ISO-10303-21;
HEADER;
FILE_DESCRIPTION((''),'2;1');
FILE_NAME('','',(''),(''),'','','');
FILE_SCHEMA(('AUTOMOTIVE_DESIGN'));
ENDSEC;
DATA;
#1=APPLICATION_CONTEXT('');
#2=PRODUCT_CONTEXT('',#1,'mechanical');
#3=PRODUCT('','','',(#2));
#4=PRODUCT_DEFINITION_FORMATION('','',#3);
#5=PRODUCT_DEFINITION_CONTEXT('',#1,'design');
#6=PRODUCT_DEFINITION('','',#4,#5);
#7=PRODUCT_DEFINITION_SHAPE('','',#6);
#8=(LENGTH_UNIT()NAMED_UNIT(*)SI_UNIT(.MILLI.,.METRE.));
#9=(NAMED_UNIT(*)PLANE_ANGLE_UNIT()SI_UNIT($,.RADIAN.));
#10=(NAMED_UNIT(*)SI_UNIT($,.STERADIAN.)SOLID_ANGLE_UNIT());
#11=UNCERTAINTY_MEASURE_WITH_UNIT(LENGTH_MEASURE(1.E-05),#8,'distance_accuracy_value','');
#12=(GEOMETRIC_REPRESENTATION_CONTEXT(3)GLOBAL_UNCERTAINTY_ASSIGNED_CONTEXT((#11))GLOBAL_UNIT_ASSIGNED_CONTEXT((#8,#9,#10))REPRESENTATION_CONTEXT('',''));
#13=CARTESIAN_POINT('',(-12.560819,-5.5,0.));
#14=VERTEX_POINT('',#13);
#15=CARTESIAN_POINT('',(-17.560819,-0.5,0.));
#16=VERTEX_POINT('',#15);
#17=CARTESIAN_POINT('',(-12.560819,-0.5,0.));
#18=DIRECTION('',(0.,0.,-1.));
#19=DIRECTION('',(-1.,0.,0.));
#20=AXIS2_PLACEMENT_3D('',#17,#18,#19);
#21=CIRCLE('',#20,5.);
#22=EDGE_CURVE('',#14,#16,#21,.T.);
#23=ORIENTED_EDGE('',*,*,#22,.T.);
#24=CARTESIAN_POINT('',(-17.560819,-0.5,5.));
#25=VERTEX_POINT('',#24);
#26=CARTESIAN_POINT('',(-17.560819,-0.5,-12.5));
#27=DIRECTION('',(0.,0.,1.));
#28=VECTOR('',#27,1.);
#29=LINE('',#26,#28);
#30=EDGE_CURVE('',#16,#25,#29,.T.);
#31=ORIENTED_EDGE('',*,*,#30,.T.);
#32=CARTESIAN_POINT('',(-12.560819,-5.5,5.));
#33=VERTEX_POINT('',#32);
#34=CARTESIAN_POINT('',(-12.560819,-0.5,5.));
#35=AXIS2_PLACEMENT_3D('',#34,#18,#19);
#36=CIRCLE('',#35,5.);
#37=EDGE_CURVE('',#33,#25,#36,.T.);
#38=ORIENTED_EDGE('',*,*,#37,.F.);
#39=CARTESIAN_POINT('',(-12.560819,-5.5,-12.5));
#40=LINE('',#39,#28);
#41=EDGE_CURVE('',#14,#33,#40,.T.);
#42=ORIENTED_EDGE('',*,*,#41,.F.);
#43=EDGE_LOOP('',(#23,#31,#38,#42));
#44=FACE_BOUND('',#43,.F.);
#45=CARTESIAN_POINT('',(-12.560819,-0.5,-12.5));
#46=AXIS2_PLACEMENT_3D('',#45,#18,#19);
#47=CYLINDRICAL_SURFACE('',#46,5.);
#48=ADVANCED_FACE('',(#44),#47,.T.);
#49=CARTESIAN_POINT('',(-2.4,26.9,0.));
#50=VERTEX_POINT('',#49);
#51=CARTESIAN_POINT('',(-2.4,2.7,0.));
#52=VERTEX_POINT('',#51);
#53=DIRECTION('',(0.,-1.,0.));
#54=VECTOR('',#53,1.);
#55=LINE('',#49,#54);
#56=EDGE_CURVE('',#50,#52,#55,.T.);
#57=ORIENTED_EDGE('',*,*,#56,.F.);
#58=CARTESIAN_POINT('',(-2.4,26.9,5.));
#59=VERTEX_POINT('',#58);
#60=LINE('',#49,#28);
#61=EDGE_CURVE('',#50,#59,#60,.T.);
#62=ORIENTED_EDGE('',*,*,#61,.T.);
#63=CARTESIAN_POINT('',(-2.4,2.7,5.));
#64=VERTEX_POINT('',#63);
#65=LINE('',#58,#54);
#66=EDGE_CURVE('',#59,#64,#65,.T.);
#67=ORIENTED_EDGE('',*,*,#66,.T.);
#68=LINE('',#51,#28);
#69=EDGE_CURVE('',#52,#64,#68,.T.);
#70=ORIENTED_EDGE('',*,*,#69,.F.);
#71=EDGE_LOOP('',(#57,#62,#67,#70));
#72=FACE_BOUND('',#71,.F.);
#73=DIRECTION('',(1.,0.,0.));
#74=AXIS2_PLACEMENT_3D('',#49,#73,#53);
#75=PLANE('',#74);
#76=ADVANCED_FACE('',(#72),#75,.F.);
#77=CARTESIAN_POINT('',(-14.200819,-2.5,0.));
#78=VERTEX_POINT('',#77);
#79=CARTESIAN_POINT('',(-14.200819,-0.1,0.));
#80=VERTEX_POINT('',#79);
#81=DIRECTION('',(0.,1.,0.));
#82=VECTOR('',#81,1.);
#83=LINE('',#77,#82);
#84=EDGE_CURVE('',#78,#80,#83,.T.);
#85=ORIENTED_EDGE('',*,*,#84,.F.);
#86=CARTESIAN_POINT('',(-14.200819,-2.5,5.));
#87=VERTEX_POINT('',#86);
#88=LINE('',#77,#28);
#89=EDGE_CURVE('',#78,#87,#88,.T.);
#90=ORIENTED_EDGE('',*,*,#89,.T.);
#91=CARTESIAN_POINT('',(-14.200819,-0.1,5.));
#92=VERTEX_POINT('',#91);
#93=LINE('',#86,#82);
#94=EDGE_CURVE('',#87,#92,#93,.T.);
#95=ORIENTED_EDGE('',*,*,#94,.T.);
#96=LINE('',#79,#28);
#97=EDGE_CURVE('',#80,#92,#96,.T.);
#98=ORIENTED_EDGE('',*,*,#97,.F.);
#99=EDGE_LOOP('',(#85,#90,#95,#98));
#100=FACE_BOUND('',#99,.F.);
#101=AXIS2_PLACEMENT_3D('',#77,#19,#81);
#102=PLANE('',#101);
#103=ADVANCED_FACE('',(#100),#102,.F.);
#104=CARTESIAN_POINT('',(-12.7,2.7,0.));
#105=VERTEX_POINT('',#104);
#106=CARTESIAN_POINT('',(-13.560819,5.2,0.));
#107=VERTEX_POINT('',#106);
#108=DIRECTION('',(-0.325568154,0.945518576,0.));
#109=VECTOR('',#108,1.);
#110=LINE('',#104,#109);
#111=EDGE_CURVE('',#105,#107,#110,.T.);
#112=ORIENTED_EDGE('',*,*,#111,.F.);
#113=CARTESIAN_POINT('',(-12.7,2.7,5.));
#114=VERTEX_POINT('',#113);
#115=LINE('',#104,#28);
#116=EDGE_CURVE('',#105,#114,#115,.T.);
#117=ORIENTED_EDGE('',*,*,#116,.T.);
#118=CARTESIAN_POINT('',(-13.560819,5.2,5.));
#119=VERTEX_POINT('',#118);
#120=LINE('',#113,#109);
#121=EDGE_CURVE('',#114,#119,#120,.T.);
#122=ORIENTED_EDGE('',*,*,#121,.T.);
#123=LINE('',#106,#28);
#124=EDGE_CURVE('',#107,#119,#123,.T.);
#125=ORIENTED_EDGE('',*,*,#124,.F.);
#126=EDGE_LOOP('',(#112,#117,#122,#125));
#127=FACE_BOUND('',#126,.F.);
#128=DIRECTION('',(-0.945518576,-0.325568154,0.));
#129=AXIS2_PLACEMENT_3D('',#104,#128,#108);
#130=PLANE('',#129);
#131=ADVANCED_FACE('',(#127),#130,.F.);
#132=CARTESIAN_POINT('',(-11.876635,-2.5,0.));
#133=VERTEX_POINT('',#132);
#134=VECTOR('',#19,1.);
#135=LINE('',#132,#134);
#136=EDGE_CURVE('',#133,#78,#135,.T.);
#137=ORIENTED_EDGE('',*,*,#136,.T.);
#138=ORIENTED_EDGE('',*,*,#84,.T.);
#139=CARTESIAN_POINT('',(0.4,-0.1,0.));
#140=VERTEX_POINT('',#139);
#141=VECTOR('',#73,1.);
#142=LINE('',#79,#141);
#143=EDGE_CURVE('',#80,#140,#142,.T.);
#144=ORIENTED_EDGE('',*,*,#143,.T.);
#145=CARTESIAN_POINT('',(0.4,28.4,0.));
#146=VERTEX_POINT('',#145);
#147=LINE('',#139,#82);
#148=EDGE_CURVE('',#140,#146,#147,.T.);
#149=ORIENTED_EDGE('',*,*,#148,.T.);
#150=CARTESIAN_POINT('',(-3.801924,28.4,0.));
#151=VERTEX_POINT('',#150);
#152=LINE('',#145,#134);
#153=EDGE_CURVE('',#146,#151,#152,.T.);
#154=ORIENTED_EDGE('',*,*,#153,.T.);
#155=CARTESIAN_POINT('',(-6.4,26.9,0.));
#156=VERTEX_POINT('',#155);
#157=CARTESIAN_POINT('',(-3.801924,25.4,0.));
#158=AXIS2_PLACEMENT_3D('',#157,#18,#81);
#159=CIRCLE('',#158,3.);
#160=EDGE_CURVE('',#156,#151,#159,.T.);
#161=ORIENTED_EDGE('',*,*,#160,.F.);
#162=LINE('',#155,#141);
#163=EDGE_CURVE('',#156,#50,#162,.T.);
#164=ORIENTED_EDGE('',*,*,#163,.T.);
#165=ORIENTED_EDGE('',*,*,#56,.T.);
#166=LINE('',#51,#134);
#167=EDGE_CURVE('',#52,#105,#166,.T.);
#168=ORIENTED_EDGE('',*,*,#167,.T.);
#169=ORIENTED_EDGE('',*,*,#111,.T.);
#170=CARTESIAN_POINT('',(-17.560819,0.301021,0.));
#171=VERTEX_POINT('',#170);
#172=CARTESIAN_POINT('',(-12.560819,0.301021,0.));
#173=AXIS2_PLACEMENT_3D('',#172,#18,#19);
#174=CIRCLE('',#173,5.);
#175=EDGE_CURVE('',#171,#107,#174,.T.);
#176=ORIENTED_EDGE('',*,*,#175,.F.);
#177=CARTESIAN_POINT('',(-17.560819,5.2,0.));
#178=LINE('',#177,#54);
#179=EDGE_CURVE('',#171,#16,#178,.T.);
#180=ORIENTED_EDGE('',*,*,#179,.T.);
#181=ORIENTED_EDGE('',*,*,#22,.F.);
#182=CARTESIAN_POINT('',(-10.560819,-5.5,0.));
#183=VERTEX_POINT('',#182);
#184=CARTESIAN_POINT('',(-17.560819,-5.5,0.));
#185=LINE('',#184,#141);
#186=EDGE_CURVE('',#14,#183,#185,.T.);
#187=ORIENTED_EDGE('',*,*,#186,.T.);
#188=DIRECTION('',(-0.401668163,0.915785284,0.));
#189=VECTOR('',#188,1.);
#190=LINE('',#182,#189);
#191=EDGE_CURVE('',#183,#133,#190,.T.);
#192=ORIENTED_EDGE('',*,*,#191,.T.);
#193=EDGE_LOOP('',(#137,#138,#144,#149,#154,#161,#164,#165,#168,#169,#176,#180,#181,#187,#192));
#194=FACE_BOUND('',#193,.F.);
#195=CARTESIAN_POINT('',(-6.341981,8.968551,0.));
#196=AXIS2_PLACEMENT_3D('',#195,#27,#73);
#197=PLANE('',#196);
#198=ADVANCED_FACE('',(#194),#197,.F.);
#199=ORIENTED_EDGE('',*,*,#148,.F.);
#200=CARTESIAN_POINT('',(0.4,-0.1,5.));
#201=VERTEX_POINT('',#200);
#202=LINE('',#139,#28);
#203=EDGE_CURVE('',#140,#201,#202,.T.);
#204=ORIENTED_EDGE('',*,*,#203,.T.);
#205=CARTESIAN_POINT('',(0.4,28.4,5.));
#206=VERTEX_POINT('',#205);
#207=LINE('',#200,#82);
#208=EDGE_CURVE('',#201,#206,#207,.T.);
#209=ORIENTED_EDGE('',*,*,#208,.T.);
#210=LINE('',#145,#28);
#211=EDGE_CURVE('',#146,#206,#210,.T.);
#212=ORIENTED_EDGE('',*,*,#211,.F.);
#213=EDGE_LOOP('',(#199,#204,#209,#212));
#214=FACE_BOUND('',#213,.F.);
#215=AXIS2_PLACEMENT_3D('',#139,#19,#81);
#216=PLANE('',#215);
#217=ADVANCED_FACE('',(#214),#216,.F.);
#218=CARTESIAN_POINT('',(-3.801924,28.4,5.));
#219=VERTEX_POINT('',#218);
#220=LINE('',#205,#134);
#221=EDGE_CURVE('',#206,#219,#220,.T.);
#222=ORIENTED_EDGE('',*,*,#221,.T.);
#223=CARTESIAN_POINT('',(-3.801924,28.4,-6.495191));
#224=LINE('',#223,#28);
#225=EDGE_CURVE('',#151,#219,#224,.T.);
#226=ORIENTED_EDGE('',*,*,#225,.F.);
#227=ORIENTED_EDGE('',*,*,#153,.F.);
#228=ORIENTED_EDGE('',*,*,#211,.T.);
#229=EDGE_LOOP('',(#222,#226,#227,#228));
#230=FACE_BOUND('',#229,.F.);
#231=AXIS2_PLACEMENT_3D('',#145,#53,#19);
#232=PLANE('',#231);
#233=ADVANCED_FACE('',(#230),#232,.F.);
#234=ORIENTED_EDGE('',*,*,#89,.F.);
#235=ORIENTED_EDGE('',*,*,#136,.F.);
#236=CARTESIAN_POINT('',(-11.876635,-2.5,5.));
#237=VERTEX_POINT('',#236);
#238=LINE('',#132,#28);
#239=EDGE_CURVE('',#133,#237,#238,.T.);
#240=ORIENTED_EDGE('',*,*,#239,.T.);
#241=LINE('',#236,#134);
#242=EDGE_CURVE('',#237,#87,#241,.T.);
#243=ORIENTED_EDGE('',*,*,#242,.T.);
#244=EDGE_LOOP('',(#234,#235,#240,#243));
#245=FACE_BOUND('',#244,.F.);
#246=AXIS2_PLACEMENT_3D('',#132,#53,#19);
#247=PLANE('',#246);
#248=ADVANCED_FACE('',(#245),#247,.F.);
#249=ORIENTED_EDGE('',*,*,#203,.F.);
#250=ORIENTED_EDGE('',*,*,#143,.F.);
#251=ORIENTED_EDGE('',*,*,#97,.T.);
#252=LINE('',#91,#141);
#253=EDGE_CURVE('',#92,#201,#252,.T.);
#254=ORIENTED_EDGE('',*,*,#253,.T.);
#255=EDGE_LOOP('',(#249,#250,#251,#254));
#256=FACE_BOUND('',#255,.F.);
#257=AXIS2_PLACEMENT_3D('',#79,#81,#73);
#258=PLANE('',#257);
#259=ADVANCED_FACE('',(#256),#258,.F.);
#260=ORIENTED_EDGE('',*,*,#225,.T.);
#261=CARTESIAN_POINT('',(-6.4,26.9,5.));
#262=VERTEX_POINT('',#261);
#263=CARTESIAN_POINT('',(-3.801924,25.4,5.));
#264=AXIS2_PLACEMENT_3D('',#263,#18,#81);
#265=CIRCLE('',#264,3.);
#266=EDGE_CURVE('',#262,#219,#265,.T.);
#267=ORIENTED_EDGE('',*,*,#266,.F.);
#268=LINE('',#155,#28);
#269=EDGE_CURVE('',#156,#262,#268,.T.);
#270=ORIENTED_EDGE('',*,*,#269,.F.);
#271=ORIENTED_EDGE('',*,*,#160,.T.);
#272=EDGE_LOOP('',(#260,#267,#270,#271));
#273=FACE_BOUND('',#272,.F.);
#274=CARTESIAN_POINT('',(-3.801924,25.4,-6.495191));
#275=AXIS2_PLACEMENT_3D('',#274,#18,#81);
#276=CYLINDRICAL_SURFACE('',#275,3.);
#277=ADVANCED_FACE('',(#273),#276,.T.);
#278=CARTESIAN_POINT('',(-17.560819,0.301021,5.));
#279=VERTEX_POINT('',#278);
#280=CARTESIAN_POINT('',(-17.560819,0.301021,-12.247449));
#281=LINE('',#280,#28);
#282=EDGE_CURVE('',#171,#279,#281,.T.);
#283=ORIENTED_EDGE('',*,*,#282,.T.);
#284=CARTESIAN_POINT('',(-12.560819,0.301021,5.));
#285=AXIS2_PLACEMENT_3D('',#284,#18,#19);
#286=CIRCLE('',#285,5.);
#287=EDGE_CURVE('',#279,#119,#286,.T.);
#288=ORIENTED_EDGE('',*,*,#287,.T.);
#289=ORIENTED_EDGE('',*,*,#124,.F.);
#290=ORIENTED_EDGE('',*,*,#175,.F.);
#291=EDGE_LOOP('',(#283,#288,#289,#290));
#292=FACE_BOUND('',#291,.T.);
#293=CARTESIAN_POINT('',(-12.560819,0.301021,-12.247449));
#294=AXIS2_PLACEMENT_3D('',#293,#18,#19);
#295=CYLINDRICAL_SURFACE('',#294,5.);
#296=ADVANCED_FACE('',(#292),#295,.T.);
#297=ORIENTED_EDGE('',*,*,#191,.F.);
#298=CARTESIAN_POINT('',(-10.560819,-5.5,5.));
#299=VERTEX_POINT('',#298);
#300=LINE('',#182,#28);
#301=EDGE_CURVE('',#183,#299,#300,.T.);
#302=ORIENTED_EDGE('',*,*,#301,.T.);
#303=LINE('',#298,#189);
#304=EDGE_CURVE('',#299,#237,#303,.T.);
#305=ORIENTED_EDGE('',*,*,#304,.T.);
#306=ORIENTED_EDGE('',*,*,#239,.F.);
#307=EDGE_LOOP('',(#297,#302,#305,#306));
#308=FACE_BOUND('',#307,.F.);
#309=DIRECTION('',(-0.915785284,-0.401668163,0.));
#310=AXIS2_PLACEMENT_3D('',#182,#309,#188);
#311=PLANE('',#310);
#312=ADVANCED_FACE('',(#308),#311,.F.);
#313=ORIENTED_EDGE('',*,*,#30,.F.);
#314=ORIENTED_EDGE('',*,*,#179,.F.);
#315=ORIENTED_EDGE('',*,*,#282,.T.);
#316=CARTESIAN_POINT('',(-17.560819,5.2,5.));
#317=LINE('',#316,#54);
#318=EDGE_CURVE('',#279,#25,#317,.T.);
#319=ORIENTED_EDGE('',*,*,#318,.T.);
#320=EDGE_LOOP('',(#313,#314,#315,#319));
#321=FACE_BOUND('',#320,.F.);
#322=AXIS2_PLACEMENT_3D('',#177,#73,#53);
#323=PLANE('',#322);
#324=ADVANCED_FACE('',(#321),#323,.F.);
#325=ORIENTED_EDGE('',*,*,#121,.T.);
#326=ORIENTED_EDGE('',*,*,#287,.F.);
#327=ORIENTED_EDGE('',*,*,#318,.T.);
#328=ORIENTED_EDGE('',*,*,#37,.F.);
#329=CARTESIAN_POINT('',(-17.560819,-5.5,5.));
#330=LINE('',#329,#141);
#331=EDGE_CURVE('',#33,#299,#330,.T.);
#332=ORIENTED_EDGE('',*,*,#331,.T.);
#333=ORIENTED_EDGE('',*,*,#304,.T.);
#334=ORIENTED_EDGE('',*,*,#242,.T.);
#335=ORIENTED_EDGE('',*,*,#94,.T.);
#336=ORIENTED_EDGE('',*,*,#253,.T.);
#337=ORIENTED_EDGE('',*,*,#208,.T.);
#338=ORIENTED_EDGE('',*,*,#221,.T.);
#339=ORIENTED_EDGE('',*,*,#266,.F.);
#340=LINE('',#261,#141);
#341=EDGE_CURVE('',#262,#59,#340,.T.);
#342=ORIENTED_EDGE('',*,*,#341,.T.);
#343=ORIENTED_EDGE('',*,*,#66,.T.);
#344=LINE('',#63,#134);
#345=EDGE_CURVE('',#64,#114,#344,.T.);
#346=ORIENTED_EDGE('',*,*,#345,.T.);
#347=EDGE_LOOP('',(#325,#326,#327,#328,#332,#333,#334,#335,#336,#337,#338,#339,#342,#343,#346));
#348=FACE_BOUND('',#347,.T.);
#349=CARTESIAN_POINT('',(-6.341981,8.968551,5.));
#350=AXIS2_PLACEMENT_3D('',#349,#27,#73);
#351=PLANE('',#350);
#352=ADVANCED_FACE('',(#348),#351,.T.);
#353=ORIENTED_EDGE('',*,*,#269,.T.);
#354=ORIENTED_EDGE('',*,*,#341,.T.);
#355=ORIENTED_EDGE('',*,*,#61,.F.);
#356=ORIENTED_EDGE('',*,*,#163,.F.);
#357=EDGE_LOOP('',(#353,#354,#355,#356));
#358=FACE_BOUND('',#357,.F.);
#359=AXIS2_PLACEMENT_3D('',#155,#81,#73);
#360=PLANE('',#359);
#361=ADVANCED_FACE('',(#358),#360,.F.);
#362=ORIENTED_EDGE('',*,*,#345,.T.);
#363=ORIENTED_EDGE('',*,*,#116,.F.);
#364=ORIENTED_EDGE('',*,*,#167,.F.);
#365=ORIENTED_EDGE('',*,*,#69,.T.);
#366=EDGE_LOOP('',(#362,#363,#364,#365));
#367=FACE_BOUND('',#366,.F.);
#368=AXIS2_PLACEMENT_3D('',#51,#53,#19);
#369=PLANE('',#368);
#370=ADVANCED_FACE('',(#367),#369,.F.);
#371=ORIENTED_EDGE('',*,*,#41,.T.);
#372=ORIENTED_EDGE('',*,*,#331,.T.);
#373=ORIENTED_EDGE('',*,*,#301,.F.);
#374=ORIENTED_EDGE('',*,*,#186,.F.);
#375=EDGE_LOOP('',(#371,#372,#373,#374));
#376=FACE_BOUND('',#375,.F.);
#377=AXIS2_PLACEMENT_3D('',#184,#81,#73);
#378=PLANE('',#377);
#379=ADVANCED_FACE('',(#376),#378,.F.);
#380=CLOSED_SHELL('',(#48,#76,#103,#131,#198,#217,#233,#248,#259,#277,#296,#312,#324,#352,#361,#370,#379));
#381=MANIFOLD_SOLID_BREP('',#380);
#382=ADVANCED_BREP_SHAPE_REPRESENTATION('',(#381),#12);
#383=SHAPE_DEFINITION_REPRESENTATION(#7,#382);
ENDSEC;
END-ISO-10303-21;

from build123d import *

# Parameters (mm, degrees)
F0_W        = 0.4
F0_H        = 28.4
F1_DEPTH    = 5
F2_T1_DEPTH = 17.9903810568
F3_T1_DEPTH = 29.4948974279
F3_T3_DEPTH = 30


# Not quite as in the source:
# - a fillet or chamfer that OpenCascade refuses, or shapes differently, is made with other operations: its cross-section is extruded or revolved along the edge and cut away or added


with BuildPart() as f1:
    # F0 (on Top) → F1 (new body)
    with BuildSketch(Plane.XY):
        Polygon((-17.5608190332, -5.5), (-10.5608190332, -5.5), (-11.8766345504, -2.5), (-14.2008190332, -2.5), (-14.2008190332, -0.1), (-14.2008190332, 0), (0, 0), (0, 28.4), (-6.4, 28.4), (-6.4, 26.9), (-2.4, 26.9), (-2.4, 2.7), (-12.7, 2.7), (-13.5608190332, 5.2), (-17.5608190332, 5.2), align=None)
        Polygon((-14.2008190332, 0), (-14.2008190332, -0.1), (0.4, -0.1), (0.4, 0), (0, 0), align=None)
        with Locations((0.2, 14.2)):
            Rectangle(F0_W, F0_H)
    extrude(amount=F1_DEPTH)

    # F2: fillet of radius 3 on 1 edges, made by hand

    # F2_s2 → F2_t1 (cut)
    with BuildSketch(Plane.XY.offset(-6.4951905284)):
        with BuildLine():
            ThreePointArc((-3.8019237886, 28.4), (-5.3019237886, 27.9980762114), (-6.4, 26.9))
            Line((-6.4, 26.9), (-6.4, 28.4))
            Line((-6.4, 28.4), (-3.8019237886, 28.4))
        make_face()
    extrude(amount=F2_T1_DEPTH, mode=Mode.SUBTRACT)

    # F3: fillet of radius 5 on 2 edges, made by hand

    # F3_s2 → F3_t1 (cut)
    with BuildSketch(Plane.XY.offset(-12.2474487139)):
        with BuildLine():
            ThreePointArc((-17.5608190332, 0.3010205144), (-16.4338023794, 3.4632981746), (-13.5608190332, 5.2))
            Line((-13.5608190332, 5.2), (-17.5608190332, 5.2))
            Line((-17.5608190332, 5.2), (-17.5608190332, 0.3010205144))
        make_face()
    extrude(amount=F3_T1_DEPTH, mode=Mode.SUBTRACT)

    # F3_s4 → F3_t3 (cut)
    with BuildSketch(Plane.XY.offset(-12.5)):
        with BuildLine():
            ThreePointArc((-17.5608190332, -0.5), (-16.0963529392, -4.0355339059), (-12.5608190332, -5.5))
            Line((-12.5608190332, -5.5), (-17.5608190332, -5.5))
            Line((-17.5608190332, -5.5), (-17.5608190332, -0.5))
        make_face()
    extrude(amount=F3_T3_DEPTH, mode=Mode.SUBTRACT)


solid = f1.part
